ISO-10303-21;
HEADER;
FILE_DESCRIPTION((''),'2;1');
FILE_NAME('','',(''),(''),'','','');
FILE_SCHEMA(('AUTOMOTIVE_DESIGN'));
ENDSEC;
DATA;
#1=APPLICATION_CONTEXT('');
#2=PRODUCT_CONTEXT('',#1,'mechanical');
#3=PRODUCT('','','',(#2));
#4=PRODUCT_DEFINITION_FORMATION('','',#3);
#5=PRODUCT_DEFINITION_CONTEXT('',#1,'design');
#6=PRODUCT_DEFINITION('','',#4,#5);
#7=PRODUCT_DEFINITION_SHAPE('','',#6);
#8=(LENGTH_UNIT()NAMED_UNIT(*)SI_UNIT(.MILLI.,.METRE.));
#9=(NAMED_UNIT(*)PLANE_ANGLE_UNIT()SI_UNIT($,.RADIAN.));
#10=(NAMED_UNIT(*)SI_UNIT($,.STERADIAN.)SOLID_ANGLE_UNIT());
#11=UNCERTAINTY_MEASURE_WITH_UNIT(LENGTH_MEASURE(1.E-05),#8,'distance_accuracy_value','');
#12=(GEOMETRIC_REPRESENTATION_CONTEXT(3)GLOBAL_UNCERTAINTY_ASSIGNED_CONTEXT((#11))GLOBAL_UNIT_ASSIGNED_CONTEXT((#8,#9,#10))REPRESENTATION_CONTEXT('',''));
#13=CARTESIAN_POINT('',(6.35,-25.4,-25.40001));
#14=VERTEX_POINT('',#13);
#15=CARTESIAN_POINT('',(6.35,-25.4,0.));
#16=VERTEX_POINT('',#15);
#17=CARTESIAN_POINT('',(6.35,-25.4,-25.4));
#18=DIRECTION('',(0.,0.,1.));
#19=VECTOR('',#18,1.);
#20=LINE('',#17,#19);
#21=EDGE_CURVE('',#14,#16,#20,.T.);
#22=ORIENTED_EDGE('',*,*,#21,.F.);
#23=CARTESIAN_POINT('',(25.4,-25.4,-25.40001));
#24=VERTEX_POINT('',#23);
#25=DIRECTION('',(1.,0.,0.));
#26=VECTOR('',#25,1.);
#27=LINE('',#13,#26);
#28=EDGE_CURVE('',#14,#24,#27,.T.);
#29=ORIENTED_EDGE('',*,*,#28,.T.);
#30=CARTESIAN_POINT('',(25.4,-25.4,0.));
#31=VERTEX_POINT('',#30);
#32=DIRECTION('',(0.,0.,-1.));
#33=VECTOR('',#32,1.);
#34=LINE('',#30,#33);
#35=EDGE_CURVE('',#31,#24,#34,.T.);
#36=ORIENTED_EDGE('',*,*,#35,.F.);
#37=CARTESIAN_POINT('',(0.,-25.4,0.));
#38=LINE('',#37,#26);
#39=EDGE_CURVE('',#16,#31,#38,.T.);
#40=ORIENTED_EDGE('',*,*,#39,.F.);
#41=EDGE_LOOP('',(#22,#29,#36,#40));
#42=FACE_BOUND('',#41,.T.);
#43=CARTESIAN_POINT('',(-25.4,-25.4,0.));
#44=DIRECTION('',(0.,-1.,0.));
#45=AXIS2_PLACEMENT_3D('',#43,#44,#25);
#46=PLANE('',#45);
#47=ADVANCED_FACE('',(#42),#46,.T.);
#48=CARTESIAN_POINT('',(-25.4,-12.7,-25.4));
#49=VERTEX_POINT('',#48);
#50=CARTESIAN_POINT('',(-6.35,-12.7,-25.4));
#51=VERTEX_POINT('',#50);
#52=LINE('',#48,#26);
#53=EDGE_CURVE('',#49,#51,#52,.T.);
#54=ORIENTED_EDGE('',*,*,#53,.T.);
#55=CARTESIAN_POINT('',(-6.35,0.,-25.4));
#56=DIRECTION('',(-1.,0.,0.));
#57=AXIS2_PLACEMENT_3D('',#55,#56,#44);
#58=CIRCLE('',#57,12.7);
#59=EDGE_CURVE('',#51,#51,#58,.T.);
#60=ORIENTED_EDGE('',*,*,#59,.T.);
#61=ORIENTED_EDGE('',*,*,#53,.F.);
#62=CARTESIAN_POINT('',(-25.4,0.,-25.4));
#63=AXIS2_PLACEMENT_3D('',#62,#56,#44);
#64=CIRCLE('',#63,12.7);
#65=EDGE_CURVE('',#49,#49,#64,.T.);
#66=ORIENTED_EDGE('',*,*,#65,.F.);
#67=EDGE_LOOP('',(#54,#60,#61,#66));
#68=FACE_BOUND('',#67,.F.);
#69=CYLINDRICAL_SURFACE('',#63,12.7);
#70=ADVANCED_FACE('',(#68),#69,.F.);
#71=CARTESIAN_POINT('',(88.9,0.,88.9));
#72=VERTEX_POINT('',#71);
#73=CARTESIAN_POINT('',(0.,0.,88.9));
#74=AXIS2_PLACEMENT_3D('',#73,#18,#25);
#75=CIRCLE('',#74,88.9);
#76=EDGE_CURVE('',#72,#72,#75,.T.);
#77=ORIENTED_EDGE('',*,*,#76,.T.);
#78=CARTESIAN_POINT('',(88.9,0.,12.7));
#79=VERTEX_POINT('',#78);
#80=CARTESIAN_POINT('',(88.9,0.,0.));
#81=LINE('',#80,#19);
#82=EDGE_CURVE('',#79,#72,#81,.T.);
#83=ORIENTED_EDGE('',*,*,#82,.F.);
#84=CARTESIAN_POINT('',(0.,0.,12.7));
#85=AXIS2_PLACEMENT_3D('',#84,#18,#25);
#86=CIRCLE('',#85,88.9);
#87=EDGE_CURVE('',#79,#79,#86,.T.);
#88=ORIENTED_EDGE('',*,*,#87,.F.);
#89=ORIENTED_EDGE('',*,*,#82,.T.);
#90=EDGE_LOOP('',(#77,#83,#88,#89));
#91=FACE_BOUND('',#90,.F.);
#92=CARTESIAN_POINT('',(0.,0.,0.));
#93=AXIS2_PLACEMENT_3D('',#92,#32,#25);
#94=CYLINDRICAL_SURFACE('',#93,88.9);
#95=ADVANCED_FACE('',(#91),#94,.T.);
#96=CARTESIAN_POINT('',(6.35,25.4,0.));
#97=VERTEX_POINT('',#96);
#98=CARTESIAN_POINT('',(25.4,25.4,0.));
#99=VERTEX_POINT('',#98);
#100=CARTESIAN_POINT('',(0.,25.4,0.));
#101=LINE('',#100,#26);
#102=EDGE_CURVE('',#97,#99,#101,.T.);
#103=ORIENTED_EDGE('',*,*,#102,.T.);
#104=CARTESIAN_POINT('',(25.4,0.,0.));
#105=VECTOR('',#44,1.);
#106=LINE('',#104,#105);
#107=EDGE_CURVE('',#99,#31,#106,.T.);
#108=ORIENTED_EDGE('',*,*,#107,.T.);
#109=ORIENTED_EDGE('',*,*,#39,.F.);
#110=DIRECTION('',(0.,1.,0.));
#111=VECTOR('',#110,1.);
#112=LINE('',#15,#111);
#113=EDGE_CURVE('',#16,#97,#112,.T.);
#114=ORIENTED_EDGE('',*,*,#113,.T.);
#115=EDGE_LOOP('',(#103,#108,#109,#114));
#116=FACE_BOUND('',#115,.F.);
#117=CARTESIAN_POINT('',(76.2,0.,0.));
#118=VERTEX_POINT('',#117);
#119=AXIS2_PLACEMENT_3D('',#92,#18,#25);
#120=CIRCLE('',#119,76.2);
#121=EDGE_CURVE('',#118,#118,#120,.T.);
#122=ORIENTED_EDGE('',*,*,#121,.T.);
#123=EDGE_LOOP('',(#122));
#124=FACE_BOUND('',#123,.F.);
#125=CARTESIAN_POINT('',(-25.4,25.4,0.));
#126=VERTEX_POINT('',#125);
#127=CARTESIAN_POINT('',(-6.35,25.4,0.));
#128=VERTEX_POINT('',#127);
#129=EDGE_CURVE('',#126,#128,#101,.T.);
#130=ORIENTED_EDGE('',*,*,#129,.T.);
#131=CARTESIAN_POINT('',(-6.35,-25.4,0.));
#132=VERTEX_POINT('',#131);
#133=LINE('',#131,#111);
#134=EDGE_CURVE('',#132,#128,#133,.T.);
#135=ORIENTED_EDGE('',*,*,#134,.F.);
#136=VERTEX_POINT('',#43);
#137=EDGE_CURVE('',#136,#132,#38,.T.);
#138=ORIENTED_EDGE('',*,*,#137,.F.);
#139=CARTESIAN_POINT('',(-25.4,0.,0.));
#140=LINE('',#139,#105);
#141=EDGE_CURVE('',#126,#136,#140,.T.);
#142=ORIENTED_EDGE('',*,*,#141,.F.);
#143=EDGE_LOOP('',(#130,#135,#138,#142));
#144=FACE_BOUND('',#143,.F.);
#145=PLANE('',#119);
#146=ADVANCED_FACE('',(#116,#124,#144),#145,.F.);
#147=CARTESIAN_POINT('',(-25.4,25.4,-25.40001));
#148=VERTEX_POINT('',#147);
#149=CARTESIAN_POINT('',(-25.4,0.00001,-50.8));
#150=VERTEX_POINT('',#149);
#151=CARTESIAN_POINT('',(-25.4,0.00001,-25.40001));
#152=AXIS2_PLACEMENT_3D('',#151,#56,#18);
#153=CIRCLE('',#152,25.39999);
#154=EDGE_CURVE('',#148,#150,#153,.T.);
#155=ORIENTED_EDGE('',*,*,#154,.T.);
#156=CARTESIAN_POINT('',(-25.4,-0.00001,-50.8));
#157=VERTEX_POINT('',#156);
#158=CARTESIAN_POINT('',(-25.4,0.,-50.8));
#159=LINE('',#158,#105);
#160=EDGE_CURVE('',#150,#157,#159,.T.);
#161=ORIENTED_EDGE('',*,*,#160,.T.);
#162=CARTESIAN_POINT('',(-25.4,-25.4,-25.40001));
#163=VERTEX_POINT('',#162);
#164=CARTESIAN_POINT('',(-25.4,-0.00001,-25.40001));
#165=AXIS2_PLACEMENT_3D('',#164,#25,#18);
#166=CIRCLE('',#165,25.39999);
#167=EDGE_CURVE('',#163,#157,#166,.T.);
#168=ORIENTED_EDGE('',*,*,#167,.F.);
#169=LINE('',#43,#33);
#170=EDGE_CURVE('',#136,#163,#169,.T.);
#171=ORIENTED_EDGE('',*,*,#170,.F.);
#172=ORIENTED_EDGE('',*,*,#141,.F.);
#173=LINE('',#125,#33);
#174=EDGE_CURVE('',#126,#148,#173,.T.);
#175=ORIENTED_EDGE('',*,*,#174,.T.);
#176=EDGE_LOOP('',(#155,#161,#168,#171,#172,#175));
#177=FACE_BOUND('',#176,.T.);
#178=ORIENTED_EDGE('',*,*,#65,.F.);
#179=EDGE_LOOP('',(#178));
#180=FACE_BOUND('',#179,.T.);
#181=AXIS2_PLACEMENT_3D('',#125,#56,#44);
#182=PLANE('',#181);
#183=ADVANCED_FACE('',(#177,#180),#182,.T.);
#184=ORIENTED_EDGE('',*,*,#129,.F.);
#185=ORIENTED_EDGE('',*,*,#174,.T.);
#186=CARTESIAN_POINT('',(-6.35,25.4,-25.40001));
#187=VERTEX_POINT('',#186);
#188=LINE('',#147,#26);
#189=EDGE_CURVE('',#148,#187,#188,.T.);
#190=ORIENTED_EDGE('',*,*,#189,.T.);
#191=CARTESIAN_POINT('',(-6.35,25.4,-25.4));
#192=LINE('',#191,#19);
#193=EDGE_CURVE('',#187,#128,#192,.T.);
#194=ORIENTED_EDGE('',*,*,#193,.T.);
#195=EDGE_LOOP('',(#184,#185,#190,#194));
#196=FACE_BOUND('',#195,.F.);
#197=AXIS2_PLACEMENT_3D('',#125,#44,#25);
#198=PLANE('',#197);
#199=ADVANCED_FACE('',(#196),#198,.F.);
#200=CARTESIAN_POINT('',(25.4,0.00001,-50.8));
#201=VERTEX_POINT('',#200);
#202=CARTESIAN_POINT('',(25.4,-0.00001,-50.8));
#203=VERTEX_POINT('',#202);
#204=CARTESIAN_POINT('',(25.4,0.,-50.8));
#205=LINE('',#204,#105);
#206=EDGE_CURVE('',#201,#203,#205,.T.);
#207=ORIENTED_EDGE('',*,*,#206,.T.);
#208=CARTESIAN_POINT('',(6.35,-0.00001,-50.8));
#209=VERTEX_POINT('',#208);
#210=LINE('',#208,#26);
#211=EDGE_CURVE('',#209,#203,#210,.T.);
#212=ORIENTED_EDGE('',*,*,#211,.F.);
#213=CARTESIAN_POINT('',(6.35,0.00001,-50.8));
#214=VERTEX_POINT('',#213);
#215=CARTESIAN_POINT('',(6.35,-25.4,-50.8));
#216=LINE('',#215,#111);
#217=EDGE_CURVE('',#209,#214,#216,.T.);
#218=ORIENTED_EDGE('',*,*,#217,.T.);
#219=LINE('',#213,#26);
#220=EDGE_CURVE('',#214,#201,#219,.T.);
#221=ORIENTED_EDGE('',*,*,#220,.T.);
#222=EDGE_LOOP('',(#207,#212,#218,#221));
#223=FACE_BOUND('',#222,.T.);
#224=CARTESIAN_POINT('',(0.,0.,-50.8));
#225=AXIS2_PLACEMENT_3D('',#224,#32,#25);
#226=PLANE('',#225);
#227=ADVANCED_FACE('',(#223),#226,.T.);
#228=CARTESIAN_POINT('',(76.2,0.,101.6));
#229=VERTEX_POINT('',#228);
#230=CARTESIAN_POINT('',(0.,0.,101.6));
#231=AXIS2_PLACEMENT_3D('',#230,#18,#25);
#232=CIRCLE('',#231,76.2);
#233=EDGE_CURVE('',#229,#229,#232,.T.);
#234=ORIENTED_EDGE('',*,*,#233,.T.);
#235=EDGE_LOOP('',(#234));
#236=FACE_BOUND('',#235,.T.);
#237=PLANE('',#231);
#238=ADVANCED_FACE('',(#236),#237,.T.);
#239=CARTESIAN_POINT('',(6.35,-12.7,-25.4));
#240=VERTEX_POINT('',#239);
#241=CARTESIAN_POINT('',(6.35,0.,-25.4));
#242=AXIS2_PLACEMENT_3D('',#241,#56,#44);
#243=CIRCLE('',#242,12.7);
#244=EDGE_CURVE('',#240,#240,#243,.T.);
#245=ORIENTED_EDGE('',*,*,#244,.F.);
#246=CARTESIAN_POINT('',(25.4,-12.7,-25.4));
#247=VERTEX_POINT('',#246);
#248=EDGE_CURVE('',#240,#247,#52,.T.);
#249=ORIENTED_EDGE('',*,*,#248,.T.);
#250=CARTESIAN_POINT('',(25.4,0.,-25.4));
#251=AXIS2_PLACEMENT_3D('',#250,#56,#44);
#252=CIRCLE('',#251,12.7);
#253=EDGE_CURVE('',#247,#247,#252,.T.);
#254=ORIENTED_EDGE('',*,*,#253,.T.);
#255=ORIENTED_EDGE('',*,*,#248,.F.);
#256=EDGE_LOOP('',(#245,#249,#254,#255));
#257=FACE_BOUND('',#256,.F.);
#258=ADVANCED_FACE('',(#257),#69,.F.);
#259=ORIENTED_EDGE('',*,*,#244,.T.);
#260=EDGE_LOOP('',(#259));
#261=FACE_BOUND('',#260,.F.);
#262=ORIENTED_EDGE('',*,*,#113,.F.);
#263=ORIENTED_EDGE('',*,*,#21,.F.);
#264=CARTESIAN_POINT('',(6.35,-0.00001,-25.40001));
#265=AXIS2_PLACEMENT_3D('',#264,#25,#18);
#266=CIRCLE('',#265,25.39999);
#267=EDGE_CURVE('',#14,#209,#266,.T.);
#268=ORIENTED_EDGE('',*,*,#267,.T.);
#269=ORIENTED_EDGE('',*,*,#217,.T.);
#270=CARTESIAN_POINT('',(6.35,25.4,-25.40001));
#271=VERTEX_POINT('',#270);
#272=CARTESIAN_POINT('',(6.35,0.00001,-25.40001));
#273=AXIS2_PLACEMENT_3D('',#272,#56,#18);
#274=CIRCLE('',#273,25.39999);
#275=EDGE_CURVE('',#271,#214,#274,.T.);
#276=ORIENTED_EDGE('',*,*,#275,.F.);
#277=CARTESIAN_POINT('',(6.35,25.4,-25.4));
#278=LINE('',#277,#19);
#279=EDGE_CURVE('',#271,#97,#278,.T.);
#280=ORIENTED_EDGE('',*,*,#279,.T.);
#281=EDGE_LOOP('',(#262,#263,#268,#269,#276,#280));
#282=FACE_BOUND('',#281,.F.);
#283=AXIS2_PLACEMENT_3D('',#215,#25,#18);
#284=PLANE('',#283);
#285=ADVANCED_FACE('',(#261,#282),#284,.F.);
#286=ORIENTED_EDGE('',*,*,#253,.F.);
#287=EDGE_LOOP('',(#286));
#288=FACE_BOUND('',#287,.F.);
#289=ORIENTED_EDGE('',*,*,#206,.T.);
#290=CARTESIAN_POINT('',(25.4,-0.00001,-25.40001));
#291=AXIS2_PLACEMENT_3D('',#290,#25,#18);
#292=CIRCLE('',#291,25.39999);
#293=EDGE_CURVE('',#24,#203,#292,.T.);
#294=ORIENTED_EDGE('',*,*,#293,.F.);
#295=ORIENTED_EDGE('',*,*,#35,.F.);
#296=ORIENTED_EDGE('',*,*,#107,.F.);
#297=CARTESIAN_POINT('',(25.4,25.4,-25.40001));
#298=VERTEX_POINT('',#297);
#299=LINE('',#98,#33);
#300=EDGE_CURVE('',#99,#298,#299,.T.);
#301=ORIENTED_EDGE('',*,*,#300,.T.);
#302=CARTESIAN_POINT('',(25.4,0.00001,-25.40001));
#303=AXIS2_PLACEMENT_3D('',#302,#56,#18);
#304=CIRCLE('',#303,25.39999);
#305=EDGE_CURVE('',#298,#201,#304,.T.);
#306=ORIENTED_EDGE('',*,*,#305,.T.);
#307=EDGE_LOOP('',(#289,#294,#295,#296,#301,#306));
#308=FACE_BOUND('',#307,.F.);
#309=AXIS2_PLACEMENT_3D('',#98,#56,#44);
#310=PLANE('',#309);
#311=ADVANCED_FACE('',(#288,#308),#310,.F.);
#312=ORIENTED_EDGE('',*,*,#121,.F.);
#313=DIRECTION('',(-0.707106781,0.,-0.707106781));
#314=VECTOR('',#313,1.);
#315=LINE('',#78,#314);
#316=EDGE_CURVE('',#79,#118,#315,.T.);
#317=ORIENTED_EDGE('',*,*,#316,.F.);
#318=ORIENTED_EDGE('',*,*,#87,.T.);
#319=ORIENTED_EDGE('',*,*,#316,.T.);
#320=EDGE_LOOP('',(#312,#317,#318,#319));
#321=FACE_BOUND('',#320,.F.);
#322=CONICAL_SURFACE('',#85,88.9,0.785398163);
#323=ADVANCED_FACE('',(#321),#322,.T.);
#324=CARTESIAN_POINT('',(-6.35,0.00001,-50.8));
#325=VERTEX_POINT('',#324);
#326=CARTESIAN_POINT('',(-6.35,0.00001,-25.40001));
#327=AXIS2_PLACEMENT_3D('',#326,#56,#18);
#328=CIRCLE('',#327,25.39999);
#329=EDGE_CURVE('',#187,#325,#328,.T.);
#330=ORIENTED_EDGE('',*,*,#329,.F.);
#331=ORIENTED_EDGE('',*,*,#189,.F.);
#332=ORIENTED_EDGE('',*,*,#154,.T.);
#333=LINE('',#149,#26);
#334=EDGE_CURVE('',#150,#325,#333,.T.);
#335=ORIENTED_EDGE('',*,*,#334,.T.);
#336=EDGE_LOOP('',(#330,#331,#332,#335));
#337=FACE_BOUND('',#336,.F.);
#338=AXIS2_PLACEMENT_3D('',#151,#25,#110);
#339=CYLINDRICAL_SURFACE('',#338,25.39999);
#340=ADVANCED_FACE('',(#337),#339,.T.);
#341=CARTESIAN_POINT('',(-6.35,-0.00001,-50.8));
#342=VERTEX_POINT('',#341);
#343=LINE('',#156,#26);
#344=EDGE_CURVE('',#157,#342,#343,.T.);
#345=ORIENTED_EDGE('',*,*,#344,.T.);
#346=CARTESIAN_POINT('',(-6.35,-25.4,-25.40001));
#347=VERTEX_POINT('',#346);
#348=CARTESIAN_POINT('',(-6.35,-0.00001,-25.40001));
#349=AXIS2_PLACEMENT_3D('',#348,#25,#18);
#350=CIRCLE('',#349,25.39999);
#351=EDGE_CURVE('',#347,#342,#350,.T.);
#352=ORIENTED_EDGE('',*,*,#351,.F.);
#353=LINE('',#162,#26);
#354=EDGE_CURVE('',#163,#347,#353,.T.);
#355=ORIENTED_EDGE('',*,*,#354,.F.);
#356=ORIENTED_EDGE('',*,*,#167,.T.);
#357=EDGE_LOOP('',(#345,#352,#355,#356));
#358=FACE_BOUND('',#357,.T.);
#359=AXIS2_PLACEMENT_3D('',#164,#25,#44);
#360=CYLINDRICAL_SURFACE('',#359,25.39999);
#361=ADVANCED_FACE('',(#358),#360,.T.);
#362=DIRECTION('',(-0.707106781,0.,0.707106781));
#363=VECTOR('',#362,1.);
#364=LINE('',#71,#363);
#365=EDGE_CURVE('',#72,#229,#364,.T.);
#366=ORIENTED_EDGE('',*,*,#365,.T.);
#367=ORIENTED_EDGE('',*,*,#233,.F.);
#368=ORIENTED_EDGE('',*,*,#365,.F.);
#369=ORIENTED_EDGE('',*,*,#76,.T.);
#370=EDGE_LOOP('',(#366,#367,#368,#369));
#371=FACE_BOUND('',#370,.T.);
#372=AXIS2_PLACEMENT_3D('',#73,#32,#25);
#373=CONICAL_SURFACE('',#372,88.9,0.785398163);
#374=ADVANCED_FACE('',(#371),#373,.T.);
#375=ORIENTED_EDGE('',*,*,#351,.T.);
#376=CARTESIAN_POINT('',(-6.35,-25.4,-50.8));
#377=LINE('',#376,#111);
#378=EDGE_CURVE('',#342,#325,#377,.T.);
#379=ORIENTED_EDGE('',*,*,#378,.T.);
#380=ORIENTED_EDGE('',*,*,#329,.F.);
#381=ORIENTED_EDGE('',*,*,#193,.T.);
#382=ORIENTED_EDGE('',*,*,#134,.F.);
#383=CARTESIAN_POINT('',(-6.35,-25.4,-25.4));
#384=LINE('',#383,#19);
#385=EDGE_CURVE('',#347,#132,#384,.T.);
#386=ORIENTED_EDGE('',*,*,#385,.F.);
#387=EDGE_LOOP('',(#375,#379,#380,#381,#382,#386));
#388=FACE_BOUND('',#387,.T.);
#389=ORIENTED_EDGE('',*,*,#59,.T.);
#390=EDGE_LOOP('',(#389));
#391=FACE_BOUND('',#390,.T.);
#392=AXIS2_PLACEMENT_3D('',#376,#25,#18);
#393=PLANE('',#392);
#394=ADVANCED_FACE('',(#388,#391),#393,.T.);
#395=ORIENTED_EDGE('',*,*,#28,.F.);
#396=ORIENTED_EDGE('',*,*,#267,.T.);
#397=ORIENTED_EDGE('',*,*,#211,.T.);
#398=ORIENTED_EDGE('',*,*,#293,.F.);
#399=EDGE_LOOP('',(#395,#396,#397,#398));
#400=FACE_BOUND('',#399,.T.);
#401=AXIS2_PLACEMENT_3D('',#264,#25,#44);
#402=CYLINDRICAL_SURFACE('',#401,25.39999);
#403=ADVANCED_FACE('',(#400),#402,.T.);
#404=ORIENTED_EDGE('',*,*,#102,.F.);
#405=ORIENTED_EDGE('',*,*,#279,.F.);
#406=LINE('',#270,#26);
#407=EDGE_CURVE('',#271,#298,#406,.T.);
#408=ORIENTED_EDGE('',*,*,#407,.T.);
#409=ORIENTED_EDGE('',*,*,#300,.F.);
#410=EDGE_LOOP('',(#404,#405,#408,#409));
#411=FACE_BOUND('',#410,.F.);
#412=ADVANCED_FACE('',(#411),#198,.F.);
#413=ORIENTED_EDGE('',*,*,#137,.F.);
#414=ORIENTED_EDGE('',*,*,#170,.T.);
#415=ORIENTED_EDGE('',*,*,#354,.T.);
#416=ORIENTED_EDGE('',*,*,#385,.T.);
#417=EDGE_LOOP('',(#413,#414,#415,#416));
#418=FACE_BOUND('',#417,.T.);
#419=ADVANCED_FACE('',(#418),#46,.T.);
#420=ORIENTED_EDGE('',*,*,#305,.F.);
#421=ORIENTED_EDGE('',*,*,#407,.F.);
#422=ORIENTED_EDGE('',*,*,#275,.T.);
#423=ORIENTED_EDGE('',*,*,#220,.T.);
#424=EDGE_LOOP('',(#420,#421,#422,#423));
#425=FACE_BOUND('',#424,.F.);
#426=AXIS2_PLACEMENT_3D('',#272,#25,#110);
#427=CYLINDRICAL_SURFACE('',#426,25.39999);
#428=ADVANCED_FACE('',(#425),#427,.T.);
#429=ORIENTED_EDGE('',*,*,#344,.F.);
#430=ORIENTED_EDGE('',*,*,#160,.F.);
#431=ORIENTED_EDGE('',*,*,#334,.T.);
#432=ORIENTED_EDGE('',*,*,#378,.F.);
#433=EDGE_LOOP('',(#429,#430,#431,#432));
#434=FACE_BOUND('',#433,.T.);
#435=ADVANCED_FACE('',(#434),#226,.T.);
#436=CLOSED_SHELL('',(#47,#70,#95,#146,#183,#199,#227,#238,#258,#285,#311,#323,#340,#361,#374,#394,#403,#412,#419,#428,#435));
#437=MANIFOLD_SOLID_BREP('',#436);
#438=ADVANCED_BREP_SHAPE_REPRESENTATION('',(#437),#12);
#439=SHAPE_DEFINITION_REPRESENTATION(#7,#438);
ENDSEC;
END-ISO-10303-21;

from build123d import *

# Parameters (mm, degrees)
F0_R     = 88.9
F1_DEPTH = 101.6
F2_SIZE  = 12.7
F3_W     = 50.8
F3_H     = 50.8
F4_DEPTH = 50.8
F5_W     = 12.7
F5_H     = 50.8
F6_DEPTH = 50.8
F7_R     = 25.39999
F8_R     = 12.7
F9_DEPTH = 50.8


# Not quite as in the source:
# - a fillet or chamfer is up to 0.001 mm smaller than in the source, because OpenCascade refuses the exact size


with BuildPart() as f1:
    # F0 (on Top) → F1 (new body)
    with BuildSketch(Plane.XY):
        Circle(F0_R)
    extrude(amount=F1_DEPTH)

    # F2
    f2_edges = [f1.edges().sort_by_distance(p)[0] for p in [
        (-88.9, 0, 101.6),
        (-88.9, 0, 0),
    ]]
    chamfer(f2_edges, length=F2_SIZE)

    # F3 (on face) → F4 (join)
    with BuildSketch(Plane(origin=(0, 0, 0), x_dir=(1, 0, 0), z_dir=(0, 0, -1))):
        Rectangle(F3_W, F3_H)
    extrude(amount=F4_DEPTH)

    # F5 (on face) → F6 (cut)
    with BuildSketch(Plane.XZ.offset(25.4)):
        with Locations((0, -25.4)):
            Rectangle(F5_W, F5_H)
    extrude(amount=-F6_DEPTH, mode=Mode.SUBTRACT)

    # F7 (radius 25.4 in the source; OpenCascade refuses exactly that, so slightly less here)
    f7_edges = [f1.edges().sort_by_distance(p)[0] for p in [
        (-15.875, -25.4, -50.8),
        (-15.875, 25.4, -50.8),
        (15.875, 25.4, -50.8),
        (15.875, -25.4, -50.8),
    ]]
    fillet(f7_edges, radius=F7_R)

    # F8 (on face) → F9 (cut, through all)
    with BuildSketch(Plane(origin=(-25.4, 0, 0), x_dir=(0, -1, 0), z_dir=(-1, 0, 0))):
        with Locations((0, -25.4)):
            Circle(F8_R)
    extrude(amount=-F9_DEPTH, mode=Mode.SUBTRACT)


solid = f1.part
